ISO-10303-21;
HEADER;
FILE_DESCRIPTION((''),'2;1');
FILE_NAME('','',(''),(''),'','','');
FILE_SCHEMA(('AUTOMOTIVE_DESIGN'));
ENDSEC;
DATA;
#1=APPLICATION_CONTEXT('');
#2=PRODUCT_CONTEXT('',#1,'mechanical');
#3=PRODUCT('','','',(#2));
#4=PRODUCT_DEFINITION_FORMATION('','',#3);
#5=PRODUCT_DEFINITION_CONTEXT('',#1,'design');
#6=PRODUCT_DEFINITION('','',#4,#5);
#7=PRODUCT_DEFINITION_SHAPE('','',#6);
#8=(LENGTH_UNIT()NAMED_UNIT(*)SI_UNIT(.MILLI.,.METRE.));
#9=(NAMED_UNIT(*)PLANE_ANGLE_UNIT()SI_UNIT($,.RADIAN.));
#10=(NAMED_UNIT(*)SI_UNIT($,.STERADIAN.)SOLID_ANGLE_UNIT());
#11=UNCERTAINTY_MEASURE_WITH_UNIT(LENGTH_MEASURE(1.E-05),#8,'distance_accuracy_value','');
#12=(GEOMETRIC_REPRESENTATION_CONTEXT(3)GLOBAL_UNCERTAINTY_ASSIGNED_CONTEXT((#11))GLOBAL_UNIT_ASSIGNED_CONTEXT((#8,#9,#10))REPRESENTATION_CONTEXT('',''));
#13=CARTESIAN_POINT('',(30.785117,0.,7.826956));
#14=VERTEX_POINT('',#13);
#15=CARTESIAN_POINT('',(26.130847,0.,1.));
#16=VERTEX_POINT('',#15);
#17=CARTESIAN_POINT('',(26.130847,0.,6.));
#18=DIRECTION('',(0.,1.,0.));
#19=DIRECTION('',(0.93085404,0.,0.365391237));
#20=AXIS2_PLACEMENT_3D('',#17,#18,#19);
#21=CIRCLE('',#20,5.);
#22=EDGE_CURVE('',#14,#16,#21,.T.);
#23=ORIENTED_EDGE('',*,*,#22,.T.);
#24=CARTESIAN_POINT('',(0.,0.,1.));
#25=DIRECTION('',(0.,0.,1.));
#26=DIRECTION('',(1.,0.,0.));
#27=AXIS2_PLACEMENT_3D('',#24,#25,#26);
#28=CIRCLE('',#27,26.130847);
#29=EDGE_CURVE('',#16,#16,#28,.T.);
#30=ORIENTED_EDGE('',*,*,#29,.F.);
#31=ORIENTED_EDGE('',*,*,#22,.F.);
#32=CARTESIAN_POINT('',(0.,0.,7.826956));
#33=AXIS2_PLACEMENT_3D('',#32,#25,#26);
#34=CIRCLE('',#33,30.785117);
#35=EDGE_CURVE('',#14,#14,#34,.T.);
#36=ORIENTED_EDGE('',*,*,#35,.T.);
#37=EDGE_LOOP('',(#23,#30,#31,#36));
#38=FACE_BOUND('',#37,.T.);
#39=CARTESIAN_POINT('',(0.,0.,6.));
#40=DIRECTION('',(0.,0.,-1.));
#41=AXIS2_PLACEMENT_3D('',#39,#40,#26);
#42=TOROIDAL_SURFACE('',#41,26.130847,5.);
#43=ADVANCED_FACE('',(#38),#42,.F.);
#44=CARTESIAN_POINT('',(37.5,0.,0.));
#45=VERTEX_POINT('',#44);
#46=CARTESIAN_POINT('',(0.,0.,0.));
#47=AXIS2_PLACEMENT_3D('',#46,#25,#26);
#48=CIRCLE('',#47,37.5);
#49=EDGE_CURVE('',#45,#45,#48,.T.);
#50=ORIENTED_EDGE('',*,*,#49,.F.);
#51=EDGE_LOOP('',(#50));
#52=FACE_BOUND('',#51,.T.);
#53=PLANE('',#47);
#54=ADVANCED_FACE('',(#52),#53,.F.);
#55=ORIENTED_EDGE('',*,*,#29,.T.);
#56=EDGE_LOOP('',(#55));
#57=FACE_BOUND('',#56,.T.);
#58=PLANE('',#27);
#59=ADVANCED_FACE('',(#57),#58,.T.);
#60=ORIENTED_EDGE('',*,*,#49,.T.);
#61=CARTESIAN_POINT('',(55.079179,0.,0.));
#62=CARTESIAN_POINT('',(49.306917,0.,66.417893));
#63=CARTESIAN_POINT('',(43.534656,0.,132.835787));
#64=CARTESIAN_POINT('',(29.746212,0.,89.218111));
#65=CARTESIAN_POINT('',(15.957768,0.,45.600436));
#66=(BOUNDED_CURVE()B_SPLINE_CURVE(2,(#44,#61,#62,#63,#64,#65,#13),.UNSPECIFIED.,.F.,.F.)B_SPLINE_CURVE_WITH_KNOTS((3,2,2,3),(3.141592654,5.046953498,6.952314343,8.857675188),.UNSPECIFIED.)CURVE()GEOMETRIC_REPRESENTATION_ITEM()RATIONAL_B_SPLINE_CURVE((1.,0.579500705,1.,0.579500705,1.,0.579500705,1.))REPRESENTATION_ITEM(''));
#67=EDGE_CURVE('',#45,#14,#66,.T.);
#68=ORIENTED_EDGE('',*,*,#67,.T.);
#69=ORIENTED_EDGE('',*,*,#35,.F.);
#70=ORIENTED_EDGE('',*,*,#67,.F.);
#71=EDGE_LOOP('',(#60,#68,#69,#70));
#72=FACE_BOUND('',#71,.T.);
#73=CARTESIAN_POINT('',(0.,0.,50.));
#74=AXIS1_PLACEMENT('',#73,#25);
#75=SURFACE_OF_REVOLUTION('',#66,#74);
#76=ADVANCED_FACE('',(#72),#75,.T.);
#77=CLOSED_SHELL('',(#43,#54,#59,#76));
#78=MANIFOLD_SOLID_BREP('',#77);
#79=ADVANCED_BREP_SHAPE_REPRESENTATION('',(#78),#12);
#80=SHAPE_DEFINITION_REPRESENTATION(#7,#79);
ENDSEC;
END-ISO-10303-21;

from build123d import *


# Not quite as in the source:
# - a feature names something its author has since deleted; it is built from what else it names


with BuildPart() as f1:
    # F0 (on Front) → F1 (revolve)
    with BuildSketch(Plane.XZ):
        with BuildLine():
            Line((0, 0), (37.5, 0))
            add(Edge.make_bspline(
                [(37.5, 0), (55.0791791491, 0), (49.3069174139, 66.4178932538), (43.5346556788, 132.8357865075), (29.7462116097, 89.2181112443), (15.9577675406, 45.6004359812), (30.7851173902, 7.8269561853)],
                knots=[3.1415926536, 3.1415926536, 3.1415926536, 5.0469534984, 5.0469534984, 6.9523143433, 6.9523143433, 8.8576751881, 8.8576751881, 8.8576751881], degree=2, weights=[1, 0.5795007053, 1, 0.5795007053, 1, 0.5795007053, 1]))
            ThreePointArc((30.7851173902, 7.8269561853), (30.2621170267, 3.1835111332), (26.13084719, 1))
            Line((26.13084719, 1), (0, 1))
            Line((0, 1), (0, 0))
        make_face()
    revolve(axis=Axis((0, 0, 50), (0, 0, 1)))


solid = f1.part
